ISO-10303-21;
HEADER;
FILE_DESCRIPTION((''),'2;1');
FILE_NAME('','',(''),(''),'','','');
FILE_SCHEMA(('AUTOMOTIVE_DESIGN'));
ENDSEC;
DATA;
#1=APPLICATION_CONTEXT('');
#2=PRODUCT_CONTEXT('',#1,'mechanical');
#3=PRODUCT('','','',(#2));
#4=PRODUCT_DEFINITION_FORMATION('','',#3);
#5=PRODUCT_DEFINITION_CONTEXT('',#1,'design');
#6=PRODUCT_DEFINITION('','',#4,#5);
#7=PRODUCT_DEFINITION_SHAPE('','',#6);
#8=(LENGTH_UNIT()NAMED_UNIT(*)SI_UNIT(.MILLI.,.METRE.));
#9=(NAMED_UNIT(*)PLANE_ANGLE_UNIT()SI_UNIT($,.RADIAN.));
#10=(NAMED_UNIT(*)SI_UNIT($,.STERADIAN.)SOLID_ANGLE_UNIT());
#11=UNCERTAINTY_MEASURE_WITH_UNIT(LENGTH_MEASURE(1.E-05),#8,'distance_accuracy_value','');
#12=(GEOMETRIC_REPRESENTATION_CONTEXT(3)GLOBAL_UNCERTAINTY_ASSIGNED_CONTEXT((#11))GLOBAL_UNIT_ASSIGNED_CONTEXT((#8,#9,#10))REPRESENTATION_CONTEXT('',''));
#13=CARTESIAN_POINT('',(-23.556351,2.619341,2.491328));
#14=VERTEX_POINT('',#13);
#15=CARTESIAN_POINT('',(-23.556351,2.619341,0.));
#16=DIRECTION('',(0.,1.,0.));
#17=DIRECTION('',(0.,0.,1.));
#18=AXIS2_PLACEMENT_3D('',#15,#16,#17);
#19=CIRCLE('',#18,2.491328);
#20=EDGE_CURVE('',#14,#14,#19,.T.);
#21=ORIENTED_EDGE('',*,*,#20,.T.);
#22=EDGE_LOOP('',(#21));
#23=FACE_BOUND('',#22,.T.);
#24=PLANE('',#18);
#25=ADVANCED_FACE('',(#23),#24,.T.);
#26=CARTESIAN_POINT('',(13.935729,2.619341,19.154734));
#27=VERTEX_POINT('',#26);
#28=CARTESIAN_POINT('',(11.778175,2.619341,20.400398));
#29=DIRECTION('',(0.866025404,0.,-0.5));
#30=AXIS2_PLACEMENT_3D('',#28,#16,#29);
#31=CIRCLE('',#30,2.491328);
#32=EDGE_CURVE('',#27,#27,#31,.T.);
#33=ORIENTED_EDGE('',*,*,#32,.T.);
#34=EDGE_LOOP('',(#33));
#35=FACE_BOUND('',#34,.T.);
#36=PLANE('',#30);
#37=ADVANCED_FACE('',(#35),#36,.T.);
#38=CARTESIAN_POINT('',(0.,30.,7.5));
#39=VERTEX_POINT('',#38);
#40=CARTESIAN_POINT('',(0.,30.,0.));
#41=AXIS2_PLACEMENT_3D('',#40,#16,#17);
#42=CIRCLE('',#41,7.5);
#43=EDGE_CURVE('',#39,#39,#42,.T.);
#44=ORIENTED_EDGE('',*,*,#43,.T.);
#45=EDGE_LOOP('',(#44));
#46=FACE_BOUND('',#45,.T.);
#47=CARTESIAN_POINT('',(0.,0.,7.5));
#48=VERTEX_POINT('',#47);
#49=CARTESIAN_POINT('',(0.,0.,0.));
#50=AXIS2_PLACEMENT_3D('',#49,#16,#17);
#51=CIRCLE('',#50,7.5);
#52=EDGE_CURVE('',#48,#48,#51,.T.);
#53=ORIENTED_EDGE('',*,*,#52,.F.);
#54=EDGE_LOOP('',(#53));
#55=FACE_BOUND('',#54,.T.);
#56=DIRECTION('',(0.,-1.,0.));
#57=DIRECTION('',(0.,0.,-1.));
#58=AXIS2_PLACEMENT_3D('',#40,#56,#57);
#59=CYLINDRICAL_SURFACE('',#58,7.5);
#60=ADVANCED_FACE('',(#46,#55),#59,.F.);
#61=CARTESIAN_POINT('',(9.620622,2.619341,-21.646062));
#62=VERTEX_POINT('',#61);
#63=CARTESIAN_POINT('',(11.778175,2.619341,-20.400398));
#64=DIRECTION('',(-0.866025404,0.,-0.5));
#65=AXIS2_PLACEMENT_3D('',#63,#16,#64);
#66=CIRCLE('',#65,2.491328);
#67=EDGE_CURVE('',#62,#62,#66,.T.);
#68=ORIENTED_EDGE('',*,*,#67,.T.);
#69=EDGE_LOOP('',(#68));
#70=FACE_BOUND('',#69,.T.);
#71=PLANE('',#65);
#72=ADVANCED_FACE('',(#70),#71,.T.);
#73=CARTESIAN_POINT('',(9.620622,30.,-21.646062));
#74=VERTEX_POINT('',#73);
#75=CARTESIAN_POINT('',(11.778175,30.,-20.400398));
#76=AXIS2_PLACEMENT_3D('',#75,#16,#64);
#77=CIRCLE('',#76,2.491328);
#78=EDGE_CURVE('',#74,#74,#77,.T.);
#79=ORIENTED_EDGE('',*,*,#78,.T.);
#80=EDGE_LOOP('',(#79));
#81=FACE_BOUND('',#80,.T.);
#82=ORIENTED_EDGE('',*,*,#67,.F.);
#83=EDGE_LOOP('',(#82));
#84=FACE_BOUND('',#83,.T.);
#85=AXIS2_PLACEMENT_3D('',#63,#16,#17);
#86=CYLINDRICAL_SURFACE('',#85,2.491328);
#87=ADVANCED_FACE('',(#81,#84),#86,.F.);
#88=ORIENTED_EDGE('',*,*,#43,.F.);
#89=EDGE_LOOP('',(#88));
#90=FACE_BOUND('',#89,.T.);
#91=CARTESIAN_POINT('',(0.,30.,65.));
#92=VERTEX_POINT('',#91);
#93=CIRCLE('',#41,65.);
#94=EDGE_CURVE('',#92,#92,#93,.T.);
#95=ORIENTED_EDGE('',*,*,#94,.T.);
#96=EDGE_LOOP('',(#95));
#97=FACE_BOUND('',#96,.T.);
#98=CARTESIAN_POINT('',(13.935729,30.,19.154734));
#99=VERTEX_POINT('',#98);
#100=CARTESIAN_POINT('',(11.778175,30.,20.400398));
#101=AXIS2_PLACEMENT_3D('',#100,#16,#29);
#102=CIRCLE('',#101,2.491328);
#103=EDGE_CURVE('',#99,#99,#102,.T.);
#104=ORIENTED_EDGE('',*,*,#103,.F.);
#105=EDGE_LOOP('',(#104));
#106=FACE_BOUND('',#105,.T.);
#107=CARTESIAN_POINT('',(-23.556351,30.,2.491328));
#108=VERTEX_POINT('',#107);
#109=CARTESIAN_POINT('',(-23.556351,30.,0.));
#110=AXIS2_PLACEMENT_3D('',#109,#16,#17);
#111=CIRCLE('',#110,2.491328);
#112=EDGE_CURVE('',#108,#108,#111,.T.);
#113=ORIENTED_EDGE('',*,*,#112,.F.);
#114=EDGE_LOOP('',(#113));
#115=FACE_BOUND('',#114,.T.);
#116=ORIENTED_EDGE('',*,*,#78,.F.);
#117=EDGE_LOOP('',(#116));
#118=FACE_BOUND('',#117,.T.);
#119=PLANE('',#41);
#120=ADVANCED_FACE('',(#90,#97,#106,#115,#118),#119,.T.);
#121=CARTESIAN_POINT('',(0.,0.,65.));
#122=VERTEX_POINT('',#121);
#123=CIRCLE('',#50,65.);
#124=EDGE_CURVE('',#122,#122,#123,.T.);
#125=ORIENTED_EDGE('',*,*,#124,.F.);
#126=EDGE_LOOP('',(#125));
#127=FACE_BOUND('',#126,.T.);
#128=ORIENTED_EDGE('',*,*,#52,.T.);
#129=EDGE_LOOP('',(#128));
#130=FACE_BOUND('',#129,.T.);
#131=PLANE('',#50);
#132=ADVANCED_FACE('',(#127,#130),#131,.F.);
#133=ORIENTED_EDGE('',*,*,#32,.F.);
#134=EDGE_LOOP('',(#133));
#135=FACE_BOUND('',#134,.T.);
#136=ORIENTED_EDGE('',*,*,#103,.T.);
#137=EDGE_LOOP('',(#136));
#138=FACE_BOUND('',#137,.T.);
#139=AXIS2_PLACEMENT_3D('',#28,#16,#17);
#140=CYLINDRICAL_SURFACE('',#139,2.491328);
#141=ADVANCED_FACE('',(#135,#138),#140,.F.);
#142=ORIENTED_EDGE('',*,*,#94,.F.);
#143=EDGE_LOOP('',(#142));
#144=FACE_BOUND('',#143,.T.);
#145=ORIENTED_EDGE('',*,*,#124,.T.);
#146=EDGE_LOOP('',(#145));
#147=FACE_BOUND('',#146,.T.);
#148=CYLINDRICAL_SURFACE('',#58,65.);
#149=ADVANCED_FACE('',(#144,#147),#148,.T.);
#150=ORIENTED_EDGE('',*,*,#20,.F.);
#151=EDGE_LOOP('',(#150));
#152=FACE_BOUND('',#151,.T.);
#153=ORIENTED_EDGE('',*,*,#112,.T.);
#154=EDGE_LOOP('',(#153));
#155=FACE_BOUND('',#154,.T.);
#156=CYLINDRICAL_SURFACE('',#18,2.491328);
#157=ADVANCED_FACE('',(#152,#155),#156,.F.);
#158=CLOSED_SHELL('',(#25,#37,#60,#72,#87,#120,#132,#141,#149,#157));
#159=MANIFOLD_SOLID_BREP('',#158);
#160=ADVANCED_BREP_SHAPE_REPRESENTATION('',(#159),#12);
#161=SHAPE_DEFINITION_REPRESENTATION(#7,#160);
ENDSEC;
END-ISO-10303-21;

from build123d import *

# Parameters (mm, degrees)
SKETCH1_R           = 65
BOSS_EXTRUDE1_DEPTH = 30
SKETCH2_R           = 7.5
CUT_EXTRUDE1_DEPTH  = 97.695398029
SKETCH3_R           = 2.491328427
CUT_EXTRUDE2_DEPTH  = 27.380658671
CIRPATTERN1_COUNT   = 3


with BuildPart() as part:
    # Sketch1 → Boss-Extrude1 (new body)
    with BuildSketch(Plane(origin=(0, 0, 0), x_dir=(1, 0, 0), z_dir=(0, 1, 0))):
        Circle(SKETCH1_R)
    extrude(amount=BOSS_EXTRUDE1_DEPTH)

    # Sketch2 → Cut-Extrude1 (cut, through all)
    with BuildSketch(Plane(origin=(0, 0, 0), x_dir=(1, 0, 0), z_dir=(0, 1, 0))):
        Circle(SKETCH2_R)
    extrude(amount=CUT_EXTRUDE1_DEPTH, mode=Mode.SUBTRACT)

    # Sketch3 → Cut-Extrude2 (cut)
    with BuildSketch(Plane(origin=(0, 30, 0), x_dir=(1, 0, 0), z_dir=(0, 1, 0))):
        with Locations((-23.556350702, 0)):
            Circle(SKETCH3_R)
    cut_extrude2 = extrude(amount=-CUT_EXTRUDE2_DEPTH, mode=Mode.SUBTRACT)

    # CirPattern1: Cut-Extrude2 ×3 about axis
    cirpattern1_axis = Axis((0, 0, 0), (0, 1, 0))
    for i in range(1, CIRPATTERN1_COUNT):
        add(cut_extrude2.rotate(cirpattern1_axis, i * 360 / CIRPATTERN1_COUNT), mode=Mode.SUBTRACT)


solid = part.part
